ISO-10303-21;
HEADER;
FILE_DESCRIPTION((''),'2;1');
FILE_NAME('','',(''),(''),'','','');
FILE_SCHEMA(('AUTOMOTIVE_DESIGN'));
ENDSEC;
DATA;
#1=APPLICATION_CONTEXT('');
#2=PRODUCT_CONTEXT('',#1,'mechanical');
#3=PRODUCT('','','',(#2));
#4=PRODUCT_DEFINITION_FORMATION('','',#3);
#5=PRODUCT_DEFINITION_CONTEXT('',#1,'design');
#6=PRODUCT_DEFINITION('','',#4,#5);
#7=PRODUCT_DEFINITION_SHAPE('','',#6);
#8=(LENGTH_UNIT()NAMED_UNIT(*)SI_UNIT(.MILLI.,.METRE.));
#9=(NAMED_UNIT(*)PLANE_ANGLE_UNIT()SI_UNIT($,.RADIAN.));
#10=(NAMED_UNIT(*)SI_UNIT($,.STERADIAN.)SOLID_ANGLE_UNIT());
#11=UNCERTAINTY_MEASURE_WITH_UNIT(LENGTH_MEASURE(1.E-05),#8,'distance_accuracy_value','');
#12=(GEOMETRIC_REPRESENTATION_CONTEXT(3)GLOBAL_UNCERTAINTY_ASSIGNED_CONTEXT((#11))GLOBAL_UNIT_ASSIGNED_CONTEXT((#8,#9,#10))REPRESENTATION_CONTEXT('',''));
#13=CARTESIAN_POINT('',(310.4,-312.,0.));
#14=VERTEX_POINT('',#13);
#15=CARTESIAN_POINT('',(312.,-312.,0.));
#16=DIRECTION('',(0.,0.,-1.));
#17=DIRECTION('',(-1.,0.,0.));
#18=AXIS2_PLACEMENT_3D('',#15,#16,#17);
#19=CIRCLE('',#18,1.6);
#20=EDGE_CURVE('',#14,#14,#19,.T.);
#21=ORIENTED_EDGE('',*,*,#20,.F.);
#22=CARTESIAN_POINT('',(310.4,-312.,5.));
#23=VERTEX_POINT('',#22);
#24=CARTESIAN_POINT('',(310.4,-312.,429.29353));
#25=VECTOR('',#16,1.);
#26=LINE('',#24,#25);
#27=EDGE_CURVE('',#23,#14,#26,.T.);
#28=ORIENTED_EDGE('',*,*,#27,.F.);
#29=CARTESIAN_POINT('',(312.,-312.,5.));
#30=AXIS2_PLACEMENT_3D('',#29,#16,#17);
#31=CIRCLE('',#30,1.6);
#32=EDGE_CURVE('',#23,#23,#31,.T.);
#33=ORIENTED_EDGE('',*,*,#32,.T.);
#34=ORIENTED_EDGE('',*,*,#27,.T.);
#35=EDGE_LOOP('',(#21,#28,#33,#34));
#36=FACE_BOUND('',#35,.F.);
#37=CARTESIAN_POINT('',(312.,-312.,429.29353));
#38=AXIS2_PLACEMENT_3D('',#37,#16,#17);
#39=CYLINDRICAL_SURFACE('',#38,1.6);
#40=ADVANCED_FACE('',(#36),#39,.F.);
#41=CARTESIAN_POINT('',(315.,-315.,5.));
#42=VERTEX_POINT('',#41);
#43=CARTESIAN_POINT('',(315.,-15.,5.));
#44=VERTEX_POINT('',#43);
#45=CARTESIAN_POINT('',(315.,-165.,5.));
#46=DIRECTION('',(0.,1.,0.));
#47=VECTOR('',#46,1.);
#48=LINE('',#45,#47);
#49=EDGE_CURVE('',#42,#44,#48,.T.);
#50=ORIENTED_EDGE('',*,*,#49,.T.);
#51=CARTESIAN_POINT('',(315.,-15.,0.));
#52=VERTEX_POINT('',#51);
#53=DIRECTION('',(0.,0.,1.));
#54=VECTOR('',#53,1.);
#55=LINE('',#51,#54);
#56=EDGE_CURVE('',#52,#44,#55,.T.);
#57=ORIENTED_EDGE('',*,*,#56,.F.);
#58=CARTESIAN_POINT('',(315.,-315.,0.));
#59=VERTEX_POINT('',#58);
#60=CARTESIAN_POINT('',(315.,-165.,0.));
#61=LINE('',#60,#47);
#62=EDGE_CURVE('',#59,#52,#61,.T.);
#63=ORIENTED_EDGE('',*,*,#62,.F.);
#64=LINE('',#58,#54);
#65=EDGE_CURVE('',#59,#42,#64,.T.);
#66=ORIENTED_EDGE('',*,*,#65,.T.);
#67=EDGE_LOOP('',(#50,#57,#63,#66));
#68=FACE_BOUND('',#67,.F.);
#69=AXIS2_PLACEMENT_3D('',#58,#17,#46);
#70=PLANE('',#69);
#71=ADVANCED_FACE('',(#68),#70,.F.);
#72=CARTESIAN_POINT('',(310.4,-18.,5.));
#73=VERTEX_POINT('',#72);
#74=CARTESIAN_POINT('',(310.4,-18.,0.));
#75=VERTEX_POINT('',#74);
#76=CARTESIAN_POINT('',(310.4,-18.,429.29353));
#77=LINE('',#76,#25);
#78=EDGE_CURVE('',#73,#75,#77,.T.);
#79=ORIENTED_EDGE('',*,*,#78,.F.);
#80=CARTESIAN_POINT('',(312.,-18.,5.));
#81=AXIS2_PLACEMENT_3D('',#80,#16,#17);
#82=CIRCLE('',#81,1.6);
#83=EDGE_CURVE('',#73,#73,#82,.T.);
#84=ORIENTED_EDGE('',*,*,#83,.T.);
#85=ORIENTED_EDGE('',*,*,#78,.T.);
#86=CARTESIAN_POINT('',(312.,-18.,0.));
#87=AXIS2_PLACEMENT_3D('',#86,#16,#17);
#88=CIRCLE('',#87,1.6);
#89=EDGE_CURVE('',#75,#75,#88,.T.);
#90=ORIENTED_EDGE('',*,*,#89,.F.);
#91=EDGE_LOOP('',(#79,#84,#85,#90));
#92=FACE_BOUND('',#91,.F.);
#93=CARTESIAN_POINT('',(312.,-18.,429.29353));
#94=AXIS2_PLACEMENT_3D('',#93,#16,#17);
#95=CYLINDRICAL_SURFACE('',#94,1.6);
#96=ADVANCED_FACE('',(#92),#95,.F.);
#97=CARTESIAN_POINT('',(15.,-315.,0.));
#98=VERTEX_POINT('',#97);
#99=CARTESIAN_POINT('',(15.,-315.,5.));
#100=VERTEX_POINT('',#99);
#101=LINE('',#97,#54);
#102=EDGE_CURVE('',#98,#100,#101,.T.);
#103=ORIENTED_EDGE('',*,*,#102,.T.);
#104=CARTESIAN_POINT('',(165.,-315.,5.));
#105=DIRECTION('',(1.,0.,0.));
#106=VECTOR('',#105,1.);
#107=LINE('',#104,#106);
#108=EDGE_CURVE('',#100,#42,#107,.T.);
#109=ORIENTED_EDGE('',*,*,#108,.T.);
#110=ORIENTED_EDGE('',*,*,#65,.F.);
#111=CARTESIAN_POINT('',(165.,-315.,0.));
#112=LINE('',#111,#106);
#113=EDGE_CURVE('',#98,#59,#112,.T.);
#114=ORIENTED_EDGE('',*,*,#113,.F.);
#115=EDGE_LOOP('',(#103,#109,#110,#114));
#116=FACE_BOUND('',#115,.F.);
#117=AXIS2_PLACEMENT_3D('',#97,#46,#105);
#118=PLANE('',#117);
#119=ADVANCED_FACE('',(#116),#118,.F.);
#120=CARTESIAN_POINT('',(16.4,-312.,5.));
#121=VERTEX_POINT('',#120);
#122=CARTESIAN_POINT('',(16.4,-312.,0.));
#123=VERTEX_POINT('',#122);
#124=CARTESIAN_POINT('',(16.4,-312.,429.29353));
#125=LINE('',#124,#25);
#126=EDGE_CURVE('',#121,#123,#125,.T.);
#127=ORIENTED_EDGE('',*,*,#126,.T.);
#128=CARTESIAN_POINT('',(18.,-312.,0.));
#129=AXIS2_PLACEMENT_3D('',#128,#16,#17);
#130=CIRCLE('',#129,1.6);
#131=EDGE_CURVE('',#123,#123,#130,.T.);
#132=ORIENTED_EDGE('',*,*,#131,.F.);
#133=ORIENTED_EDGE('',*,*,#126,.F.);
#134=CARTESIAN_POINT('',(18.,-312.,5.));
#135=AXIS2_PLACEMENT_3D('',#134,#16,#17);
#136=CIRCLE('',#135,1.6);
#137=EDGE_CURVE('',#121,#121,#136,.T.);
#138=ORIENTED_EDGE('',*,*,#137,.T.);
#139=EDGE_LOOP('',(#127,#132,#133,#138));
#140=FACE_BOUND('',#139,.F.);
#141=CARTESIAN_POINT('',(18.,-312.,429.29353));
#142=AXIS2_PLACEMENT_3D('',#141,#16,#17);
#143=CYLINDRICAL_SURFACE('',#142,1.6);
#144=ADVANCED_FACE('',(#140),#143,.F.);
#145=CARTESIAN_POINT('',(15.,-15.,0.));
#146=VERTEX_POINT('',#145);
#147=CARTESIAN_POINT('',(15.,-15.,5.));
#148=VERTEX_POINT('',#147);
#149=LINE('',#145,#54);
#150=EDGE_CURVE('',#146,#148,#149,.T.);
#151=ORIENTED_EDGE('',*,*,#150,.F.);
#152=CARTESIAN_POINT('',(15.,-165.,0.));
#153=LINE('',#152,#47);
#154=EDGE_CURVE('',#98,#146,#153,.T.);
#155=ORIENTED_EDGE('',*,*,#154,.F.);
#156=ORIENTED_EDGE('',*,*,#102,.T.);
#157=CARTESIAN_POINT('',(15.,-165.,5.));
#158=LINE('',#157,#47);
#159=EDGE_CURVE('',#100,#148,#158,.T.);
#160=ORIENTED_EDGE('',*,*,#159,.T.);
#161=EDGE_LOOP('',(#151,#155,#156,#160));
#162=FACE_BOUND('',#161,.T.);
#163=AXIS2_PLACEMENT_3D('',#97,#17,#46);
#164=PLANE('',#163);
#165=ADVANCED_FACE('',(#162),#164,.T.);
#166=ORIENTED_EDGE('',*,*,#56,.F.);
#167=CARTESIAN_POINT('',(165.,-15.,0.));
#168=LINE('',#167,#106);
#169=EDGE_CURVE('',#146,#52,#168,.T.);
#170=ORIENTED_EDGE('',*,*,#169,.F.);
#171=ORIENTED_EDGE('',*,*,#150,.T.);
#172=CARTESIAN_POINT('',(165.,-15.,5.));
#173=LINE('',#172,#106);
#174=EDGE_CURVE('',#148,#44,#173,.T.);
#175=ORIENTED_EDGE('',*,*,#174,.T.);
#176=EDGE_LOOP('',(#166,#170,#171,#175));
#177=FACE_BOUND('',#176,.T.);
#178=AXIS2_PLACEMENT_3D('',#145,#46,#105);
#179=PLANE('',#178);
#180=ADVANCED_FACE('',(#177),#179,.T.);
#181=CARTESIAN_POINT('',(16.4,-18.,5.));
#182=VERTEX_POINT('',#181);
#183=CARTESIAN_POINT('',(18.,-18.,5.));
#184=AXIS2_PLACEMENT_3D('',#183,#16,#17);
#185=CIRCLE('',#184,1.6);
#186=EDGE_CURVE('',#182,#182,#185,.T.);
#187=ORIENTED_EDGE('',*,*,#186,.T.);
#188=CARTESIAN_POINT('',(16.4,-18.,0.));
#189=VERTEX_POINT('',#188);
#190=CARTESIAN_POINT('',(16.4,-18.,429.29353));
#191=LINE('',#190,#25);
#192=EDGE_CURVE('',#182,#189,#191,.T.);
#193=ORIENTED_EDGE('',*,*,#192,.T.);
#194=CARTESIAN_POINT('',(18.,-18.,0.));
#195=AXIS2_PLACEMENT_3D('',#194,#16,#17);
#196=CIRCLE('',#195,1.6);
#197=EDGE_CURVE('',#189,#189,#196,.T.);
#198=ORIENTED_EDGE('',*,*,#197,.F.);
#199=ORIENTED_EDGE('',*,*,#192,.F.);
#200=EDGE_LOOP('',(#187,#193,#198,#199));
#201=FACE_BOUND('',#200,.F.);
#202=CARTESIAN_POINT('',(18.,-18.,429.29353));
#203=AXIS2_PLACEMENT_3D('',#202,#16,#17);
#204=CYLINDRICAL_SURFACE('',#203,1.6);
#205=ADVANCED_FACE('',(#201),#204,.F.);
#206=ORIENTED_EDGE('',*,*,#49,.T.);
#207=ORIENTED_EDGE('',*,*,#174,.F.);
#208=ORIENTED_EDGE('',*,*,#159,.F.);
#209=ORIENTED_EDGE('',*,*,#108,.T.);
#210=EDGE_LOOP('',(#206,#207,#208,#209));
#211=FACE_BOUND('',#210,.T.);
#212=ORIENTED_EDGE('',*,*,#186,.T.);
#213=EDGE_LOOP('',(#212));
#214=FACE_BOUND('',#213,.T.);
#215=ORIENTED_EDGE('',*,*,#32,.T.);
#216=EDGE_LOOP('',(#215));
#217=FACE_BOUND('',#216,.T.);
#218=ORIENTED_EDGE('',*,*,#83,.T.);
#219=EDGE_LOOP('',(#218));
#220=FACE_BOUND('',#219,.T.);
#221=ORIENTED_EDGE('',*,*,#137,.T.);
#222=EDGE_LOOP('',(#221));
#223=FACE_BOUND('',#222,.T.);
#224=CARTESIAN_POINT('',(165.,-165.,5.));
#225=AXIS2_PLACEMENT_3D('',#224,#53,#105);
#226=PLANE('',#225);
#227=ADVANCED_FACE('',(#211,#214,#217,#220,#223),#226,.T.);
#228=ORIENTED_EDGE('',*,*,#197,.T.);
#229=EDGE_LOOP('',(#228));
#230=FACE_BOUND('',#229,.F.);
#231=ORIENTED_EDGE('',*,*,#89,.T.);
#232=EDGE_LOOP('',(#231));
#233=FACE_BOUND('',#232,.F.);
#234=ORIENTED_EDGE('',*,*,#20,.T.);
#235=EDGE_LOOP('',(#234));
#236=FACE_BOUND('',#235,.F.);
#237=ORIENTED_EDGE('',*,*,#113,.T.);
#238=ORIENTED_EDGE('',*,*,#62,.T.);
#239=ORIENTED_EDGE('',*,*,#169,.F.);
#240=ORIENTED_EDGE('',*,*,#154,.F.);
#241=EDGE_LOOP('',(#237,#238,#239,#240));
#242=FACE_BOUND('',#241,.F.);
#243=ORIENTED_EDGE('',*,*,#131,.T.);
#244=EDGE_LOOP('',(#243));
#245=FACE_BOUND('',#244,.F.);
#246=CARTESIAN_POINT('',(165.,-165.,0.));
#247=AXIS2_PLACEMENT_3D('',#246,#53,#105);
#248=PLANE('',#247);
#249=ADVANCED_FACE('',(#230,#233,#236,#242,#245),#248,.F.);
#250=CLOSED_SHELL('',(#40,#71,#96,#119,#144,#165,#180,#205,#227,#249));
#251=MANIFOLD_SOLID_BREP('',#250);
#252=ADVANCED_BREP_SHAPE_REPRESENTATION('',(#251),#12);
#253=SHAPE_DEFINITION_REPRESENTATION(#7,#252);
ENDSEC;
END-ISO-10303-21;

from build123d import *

# Parameters (mm, degrees)
F0_W     = 300
F0_H     = 300
F1_DEPTH = 5
F3_D     = 3.2


with BuildPart() as f1:
    # F0 (on Top) → F1 (new body)
    with BuildSketch(Plane.XY):
        with Locations((165, -165)):
            Rectangle(F0_W, F0_H)
    extrude(amount=F1_DEPTH)

    # F3 (through all)
    with Locations(Plane.XY.offset(5)):
        with Locations((18, -18), (312, -18), (312, -312), (18, -312)):
            Hole(F3_D / 2)


solid = f1.part
